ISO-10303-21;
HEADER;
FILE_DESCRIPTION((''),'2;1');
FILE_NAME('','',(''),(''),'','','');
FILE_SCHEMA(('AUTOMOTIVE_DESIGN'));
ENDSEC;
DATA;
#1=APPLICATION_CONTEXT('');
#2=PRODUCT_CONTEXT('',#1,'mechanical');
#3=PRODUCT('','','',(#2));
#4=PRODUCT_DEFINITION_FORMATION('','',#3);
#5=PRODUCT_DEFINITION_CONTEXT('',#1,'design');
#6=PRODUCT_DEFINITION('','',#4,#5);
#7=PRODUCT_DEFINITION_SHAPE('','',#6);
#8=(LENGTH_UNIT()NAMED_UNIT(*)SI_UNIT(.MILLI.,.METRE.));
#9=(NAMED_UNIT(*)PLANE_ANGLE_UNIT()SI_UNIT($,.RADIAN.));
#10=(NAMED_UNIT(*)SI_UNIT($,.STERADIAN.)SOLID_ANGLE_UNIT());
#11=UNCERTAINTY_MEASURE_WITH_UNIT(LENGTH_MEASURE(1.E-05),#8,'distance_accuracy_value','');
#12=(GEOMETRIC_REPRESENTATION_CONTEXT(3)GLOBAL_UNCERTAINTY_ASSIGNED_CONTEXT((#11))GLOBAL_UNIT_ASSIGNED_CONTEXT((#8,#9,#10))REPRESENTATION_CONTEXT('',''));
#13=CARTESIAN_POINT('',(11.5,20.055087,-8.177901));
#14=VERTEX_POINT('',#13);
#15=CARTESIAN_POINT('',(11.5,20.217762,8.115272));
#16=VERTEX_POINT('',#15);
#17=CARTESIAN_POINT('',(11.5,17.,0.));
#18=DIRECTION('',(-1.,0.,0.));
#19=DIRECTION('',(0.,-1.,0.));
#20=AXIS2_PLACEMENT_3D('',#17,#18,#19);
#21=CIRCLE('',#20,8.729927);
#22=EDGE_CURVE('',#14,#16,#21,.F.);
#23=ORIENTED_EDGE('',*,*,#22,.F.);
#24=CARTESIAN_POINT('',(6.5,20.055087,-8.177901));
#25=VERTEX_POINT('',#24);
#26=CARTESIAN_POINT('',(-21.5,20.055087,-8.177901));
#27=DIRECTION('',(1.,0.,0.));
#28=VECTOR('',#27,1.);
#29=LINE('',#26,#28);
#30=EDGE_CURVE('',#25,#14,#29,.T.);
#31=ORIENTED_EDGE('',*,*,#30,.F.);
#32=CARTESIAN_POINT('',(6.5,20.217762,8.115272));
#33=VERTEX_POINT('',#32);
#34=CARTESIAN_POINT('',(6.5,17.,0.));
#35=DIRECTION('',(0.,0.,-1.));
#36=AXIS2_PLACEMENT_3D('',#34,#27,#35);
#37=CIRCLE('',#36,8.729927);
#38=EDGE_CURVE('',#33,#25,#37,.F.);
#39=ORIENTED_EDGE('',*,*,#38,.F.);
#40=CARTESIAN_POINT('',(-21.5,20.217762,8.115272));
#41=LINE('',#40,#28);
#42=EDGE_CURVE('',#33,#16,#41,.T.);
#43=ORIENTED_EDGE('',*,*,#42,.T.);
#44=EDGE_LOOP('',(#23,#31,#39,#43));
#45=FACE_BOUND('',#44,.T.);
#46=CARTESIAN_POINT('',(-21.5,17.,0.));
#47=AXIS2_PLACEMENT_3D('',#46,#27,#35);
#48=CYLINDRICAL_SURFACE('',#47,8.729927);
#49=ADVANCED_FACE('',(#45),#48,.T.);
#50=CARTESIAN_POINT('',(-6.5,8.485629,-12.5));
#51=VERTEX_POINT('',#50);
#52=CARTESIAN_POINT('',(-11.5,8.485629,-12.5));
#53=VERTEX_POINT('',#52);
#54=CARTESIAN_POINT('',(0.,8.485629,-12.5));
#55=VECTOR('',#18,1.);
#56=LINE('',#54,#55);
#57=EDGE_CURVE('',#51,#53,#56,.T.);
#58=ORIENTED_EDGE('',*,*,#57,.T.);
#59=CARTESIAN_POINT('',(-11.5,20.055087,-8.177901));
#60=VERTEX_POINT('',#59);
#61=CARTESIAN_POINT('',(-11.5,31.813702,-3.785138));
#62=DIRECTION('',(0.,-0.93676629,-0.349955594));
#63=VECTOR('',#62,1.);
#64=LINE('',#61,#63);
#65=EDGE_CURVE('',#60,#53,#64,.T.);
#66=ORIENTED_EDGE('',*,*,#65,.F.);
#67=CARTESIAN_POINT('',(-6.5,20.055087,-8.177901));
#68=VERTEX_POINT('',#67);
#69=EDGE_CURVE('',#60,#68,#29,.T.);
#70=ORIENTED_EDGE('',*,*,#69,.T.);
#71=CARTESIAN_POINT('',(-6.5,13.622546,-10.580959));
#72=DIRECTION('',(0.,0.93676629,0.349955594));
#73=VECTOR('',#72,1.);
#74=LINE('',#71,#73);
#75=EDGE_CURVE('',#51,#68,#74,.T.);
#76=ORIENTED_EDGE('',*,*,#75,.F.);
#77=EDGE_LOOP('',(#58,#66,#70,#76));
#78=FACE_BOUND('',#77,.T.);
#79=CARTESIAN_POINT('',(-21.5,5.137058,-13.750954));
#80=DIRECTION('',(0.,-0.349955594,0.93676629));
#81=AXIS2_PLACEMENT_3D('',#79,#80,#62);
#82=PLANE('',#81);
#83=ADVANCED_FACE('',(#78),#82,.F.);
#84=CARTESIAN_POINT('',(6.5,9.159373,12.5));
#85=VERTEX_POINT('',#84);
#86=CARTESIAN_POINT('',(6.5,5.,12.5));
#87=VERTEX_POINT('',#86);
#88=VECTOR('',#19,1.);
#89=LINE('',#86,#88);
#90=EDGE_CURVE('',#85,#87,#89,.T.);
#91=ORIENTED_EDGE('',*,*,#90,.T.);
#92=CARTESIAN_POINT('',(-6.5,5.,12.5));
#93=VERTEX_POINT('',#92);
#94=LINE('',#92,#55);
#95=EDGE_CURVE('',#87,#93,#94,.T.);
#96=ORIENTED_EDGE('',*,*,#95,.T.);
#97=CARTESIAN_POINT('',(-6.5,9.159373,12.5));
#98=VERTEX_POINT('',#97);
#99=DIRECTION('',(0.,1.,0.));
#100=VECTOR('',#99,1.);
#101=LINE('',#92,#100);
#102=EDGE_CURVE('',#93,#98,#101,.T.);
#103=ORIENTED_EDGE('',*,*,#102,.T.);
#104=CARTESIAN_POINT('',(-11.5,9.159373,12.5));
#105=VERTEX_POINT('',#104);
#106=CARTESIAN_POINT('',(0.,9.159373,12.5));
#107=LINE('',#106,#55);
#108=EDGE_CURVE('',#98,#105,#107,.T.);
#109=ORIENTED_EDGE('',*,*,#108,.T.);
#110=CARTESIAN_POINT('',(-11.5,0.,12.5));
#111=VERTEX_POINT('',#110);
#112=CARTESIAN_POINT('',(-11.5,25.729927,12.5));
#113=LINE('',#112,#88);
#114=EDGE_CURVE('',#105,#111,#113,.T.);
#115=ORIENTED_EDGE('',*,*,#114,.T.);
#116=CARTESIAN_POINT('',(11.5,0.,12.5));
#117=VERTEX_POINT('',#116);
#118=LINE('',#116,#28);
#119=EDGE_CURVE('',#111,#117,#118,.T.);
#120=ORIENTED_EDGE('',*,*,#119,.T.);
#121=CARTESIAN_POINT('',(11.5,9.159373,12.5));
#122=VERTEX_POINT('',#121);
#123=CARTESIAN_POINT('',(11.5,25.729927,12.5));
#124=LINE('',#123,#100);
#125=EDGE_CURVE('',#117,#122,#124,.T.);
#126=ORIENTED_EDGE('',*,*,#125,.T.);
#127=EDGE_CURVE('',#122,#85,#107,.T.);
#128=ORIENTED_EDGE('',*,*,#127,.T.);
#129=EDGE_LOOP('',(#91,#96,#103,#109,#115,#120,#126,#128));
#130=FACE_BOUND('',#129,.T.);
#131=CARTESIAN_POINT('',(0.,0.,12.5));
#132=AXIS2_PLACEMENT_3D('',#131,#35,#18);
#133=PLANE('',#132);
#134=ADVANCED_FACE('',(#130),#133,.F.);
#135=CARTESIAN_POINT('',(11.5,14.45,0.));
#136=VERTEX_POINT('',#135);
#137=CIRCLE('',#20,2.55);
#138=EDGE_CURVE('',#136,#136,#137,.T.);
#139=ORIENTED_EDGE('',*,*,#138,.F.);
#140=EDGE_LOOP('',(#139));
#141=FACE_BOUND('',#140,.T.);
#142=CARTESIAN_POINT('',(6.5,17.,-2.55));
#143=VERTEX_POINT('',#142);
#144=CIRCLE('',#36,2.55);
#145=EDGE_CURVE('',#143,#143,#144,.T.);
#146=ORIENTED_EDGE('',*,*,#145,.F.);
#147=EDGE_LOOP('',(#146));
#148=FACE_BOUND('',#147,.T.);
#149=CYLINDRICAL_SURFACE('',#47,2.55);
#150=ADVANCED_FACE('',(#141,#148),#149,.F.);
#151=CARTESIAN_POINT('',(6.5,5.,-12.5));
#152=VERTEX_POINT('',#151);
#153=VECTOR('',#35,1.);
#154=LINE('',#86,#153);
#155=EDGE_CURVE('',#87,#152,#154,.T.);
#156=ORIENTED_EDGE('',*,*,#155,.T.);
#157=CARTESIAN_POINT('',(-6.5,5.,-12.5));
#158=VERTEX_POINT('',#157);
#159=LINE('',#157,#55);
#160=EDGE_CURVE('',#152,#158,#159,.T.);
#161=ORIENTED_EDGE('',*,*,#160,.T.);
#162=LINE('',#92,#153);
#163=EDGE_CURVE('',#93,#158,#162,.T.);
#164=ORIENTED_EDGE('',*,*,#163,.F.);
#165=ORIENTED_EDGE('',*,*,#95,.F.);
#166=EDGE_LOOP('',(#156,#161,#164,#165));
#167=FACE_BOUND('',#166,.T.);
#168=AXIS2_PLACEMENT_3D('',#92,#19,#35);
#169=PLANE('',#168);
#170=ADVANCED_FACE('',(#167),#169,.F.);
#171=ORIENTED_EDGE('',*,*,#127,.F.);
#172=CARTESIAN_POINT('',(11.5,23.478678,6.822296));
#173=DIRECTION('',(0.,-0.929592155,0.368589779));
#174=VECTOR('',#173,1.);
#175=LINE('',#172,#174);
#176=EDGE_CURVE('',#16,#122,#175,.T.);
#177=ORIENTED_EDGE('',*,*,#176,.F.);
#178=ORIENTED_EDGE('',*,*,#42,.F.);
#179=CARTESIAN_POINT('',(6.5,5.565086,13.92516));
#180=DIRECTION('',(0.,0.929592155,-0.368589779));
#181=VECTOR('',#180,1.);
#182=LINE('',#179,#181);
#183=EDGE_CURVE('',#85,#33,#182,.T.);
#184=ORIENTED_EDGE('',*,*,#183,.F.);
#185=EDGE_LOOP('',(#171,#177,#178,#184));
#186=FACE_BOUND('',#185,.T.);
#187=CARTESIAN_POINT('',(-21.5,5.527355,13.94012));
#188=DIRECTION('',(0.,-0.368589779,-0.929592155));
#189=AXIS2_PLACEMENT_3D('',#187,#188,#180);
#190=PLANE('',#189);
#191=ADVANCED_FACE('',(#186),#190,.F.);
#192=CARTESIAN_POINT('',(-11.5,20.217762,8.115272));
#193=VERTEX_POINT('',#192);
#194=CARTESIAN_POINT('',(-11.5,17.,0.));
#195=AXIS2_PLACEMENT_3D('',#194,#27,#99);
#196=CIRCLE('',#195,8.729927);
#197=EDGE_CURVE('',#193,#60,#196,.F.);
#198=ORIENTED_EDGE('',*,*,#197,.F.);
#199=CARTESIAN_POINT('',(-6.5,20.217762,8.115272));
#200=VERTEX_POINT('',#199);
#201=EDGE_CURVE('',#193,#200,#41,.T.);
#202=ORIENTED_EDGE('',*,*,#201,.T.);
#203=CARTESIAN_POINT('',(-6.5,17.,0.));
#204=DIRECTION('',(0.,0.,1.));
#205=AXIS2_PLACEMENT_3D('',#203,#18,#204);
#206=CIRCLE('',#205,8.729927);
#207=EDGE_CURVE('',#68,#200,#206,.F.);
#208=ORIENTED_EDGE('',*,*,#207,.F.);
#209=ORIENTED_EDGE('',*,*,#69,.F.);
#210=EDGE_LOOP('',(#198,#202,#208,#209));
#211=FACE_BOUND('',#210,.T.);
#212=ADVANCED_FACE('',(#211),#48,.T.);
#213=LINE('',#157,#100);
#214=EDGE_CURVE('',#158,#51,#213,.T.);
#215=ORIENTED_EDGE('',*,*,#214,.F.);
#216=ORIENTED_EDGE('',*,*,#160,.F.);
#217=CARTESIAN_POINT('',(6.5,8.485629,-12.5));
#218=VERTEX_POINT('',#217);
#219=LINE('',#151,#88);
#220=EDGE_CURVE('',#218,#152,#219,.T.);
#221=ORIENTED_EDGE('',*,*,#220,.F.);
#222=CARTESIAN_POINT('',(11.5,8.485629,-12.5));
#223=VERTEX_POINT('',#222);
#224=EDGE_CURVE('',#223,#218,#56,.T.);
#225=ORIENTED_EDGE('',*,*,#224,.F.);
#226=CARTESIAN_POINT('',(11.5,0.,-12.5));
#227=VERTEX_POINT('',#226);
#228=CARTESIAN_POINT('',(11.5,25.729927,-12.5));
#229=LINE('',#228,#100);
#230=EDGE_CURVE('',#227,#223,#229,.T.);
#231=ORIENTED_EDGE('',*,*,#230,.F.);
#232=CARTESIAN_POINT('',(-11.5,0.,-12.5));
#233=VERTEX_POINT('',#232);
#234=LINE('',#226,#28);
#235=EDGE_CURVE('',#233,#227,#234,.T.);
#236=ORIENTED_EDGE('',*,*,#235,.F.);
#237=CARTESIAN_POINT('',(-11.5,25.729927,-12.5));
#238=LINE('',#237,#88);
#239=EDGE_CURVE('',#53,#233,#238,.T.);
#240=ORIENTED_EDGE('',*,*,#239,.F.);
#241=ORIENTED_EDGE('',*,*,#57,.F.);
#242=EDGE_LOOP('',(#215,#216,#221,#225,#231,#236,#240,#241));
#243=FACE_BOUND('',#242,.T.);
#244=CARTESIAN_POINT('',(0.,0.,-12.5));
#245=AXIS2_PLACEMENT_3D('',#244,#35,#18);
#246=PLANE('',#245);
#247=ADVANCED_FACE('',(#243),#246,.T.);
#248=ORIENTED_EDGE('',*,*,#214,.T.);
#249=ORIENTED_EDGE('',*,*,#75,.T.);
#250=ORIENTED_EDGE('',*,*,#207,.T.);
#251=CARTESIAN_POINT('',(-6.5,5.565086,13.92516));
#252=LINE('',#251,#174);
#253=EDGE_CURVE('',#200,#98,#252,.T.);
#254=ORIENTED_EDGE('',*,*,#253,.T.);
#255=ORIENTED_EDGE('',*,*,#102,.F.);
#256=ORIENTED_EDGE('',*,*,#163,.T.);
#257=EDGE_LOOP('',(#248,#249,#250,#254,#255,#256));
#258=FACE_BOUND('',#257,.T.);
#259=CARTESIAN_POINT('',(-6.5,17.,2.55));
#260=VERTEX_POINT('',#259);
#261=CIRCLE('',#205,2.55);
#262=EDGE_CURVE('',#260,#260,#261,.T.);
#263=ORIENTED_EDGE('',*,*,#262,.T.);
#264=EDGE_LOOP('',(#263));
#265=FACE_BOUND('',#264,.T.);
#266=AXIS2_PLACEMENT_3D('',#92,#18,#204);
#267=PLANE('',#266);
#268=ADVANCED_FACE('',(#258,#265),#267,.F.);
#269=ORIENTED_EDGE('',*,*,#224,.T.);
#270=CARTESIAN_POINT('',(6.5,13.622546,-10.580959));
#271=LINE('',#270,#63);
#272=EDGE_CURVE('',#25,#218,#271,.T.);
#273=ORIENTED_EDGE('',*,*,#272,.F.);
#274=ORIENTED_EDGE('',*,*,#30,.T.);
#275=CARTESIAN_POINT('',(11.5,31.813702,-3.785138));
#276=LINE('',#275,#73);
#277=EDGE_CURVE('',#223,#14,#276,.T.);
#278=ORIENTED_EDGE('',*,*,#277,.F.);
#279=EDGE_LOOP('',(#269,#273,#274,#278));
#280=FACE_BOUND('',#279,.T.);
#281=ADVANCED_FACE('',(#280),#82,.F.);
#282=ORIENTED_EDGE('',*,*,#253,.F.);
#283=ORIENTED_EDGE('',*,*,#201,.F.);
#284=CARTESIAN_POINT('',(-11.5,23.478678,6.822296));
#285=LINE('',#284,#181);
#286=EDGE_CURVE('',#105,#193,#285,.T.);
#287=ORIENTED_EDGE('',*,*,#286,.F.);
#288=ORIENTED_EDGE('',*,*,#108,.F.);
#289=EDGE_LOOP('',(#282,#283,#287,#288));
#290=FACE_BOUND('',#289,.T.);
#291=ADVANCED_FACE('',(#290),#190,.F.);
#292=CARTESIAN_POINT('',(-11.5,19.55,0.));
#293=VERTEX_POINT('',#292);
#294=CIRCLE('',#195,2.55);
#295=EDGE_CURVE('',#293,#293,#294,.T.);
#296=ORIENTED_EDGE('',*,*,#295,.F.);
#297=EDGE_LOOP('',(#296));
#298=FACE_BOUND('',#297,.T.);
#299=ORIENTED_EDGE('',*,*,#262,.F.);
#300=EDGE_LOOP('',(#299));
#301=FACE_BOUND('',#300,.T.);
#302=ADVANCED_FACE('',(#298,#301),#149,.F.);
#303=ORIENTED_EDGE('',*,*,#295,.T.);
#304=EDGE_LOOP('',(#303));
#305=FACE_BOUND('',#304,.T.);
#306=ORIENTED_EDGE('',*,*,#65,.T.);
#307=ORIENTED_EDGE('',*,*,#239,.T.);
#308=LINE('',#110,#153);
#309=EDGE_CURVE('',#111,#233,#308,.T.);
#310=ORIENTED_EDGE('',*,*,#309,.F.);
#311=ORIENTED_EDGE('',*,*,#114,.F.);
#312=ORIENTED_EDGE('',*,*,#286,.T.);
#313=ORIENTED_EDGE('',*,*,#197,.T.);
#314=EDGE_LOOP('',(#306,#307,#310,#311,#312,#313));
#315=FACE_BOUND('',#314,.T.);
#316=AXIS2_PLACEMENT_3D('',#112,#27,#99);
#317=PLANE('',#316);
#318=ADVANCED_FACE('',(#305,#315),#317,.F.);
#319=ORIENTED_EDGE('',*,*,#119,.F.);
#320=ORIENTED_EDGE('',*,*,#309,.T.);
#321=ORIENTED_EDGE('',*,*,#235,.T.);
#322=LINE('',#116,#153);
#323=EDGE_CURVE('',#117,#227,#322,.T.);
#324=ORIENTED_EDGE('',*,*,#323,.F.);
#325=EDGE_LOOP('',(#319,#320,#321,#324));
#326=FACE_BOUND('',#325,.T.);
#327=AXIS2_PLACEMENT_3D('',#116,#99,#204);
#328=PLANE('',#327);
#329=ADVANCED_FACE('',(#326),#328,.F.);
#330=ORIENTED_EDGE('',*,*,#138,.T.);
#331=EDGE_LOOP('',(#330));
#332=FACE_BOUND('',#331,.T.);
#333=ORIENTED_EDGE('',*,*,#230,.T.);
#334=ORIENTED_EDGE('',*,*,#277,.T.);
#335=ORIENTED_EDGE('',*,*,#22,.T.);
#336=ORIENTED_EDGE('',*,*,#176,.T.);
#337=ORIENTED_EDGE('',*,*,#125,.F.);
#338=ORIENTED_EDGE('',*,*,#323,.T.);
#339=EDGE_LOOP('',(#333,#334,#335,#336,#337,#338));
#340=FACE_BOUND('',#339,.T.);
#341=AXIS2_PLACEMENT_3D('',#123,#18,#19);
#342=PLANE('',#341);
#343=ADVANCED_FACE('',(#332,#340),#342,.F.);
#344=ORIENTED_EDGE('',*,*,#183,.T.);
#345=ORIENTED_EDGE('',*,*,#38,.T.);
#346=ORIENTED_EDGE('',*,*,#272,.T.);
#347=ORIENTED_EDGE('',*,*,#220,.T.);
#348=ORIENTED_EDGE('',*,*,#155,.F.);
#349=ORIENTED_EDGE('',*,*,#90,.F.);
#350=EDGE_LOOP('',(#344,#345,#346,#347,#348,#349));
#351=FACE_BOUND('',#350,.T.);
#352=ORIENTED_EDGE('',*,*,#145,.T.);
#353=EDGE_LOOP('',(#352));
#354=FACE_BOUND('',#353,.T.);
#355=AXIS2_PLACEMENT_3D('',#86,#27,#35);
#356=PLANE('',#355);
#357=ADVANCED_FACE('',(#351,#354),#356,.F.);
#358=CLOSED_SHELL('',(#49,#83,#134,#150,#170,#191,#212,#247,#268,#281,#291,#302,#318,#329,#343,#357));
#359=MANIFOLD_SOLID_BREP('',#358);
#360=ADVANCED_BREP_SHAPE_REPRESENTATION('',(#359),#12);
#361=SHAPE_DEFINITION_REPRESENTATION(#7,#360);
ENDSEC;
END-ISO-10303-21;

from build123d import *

# Parameters (mm, degrees)
BOSS_EXTRUDE1_DEPTH = 12.5
SKETCH2_R           = 2.55
CUT_EXTRUDE1_DEPTH  = 21.5


with BuildPart() as part:
    # Sketch1 → Boss-Extrude1 (new, symmetric)
    with BuildSketch(Plane.XY):
        Polygon((-6.5, 5), (6.5, 5), (6.5, 25.729927007), (11.5, 25.729927007), (11.5, 0), (-11.5, 0), (-11.5, 25.729927007), (-6.5, 25.729927007), align=None)
    extrude(amount=BOSS_EXTRUDE1_DEPTH, both=True)

    # Sketch2 → Cut-Extrude1 (cut, symmetric)
    with BuildSketch(Plane(origin=(0, 0, 0), x_dir=(0, 0, -1), z_dir=(1, 0, 0))):
        with BuildLine():
            Line((-12.5, 25.729927007), (-12.5, 9.159373111))
            Line((-12.5, 9.159373111), (-8.115271661, 20.217761866))
            ThreePointArc((-8.115271661, 20.217761866), (-4.905140127, 24.221580567), (0, 25.729927007))
            Line((0, 25.729927007), (-12.5, 25.729927007))
        make_face()
        with BuildLine():
            Line((12.5, 25.729927007), (0, 25.729927007))
            ThreePointArc((0, 25.729927007), (4.976994116, 24.172248958), (8.177901336, 20.055086791))
            Line((8.177901336, 20.055086791), (12.5, 8.485629403))
            Line((12.5, 8.485629403), (12.5, 25.729927007))
        make_face()
        with Locations((0, 17)):
            Circle(SKETCH2_R)
    extrude(amount=CUT_EXTRUDE1_DEPTH, both=True, mode=Mode.SUBTRACT)


solid = part.part
